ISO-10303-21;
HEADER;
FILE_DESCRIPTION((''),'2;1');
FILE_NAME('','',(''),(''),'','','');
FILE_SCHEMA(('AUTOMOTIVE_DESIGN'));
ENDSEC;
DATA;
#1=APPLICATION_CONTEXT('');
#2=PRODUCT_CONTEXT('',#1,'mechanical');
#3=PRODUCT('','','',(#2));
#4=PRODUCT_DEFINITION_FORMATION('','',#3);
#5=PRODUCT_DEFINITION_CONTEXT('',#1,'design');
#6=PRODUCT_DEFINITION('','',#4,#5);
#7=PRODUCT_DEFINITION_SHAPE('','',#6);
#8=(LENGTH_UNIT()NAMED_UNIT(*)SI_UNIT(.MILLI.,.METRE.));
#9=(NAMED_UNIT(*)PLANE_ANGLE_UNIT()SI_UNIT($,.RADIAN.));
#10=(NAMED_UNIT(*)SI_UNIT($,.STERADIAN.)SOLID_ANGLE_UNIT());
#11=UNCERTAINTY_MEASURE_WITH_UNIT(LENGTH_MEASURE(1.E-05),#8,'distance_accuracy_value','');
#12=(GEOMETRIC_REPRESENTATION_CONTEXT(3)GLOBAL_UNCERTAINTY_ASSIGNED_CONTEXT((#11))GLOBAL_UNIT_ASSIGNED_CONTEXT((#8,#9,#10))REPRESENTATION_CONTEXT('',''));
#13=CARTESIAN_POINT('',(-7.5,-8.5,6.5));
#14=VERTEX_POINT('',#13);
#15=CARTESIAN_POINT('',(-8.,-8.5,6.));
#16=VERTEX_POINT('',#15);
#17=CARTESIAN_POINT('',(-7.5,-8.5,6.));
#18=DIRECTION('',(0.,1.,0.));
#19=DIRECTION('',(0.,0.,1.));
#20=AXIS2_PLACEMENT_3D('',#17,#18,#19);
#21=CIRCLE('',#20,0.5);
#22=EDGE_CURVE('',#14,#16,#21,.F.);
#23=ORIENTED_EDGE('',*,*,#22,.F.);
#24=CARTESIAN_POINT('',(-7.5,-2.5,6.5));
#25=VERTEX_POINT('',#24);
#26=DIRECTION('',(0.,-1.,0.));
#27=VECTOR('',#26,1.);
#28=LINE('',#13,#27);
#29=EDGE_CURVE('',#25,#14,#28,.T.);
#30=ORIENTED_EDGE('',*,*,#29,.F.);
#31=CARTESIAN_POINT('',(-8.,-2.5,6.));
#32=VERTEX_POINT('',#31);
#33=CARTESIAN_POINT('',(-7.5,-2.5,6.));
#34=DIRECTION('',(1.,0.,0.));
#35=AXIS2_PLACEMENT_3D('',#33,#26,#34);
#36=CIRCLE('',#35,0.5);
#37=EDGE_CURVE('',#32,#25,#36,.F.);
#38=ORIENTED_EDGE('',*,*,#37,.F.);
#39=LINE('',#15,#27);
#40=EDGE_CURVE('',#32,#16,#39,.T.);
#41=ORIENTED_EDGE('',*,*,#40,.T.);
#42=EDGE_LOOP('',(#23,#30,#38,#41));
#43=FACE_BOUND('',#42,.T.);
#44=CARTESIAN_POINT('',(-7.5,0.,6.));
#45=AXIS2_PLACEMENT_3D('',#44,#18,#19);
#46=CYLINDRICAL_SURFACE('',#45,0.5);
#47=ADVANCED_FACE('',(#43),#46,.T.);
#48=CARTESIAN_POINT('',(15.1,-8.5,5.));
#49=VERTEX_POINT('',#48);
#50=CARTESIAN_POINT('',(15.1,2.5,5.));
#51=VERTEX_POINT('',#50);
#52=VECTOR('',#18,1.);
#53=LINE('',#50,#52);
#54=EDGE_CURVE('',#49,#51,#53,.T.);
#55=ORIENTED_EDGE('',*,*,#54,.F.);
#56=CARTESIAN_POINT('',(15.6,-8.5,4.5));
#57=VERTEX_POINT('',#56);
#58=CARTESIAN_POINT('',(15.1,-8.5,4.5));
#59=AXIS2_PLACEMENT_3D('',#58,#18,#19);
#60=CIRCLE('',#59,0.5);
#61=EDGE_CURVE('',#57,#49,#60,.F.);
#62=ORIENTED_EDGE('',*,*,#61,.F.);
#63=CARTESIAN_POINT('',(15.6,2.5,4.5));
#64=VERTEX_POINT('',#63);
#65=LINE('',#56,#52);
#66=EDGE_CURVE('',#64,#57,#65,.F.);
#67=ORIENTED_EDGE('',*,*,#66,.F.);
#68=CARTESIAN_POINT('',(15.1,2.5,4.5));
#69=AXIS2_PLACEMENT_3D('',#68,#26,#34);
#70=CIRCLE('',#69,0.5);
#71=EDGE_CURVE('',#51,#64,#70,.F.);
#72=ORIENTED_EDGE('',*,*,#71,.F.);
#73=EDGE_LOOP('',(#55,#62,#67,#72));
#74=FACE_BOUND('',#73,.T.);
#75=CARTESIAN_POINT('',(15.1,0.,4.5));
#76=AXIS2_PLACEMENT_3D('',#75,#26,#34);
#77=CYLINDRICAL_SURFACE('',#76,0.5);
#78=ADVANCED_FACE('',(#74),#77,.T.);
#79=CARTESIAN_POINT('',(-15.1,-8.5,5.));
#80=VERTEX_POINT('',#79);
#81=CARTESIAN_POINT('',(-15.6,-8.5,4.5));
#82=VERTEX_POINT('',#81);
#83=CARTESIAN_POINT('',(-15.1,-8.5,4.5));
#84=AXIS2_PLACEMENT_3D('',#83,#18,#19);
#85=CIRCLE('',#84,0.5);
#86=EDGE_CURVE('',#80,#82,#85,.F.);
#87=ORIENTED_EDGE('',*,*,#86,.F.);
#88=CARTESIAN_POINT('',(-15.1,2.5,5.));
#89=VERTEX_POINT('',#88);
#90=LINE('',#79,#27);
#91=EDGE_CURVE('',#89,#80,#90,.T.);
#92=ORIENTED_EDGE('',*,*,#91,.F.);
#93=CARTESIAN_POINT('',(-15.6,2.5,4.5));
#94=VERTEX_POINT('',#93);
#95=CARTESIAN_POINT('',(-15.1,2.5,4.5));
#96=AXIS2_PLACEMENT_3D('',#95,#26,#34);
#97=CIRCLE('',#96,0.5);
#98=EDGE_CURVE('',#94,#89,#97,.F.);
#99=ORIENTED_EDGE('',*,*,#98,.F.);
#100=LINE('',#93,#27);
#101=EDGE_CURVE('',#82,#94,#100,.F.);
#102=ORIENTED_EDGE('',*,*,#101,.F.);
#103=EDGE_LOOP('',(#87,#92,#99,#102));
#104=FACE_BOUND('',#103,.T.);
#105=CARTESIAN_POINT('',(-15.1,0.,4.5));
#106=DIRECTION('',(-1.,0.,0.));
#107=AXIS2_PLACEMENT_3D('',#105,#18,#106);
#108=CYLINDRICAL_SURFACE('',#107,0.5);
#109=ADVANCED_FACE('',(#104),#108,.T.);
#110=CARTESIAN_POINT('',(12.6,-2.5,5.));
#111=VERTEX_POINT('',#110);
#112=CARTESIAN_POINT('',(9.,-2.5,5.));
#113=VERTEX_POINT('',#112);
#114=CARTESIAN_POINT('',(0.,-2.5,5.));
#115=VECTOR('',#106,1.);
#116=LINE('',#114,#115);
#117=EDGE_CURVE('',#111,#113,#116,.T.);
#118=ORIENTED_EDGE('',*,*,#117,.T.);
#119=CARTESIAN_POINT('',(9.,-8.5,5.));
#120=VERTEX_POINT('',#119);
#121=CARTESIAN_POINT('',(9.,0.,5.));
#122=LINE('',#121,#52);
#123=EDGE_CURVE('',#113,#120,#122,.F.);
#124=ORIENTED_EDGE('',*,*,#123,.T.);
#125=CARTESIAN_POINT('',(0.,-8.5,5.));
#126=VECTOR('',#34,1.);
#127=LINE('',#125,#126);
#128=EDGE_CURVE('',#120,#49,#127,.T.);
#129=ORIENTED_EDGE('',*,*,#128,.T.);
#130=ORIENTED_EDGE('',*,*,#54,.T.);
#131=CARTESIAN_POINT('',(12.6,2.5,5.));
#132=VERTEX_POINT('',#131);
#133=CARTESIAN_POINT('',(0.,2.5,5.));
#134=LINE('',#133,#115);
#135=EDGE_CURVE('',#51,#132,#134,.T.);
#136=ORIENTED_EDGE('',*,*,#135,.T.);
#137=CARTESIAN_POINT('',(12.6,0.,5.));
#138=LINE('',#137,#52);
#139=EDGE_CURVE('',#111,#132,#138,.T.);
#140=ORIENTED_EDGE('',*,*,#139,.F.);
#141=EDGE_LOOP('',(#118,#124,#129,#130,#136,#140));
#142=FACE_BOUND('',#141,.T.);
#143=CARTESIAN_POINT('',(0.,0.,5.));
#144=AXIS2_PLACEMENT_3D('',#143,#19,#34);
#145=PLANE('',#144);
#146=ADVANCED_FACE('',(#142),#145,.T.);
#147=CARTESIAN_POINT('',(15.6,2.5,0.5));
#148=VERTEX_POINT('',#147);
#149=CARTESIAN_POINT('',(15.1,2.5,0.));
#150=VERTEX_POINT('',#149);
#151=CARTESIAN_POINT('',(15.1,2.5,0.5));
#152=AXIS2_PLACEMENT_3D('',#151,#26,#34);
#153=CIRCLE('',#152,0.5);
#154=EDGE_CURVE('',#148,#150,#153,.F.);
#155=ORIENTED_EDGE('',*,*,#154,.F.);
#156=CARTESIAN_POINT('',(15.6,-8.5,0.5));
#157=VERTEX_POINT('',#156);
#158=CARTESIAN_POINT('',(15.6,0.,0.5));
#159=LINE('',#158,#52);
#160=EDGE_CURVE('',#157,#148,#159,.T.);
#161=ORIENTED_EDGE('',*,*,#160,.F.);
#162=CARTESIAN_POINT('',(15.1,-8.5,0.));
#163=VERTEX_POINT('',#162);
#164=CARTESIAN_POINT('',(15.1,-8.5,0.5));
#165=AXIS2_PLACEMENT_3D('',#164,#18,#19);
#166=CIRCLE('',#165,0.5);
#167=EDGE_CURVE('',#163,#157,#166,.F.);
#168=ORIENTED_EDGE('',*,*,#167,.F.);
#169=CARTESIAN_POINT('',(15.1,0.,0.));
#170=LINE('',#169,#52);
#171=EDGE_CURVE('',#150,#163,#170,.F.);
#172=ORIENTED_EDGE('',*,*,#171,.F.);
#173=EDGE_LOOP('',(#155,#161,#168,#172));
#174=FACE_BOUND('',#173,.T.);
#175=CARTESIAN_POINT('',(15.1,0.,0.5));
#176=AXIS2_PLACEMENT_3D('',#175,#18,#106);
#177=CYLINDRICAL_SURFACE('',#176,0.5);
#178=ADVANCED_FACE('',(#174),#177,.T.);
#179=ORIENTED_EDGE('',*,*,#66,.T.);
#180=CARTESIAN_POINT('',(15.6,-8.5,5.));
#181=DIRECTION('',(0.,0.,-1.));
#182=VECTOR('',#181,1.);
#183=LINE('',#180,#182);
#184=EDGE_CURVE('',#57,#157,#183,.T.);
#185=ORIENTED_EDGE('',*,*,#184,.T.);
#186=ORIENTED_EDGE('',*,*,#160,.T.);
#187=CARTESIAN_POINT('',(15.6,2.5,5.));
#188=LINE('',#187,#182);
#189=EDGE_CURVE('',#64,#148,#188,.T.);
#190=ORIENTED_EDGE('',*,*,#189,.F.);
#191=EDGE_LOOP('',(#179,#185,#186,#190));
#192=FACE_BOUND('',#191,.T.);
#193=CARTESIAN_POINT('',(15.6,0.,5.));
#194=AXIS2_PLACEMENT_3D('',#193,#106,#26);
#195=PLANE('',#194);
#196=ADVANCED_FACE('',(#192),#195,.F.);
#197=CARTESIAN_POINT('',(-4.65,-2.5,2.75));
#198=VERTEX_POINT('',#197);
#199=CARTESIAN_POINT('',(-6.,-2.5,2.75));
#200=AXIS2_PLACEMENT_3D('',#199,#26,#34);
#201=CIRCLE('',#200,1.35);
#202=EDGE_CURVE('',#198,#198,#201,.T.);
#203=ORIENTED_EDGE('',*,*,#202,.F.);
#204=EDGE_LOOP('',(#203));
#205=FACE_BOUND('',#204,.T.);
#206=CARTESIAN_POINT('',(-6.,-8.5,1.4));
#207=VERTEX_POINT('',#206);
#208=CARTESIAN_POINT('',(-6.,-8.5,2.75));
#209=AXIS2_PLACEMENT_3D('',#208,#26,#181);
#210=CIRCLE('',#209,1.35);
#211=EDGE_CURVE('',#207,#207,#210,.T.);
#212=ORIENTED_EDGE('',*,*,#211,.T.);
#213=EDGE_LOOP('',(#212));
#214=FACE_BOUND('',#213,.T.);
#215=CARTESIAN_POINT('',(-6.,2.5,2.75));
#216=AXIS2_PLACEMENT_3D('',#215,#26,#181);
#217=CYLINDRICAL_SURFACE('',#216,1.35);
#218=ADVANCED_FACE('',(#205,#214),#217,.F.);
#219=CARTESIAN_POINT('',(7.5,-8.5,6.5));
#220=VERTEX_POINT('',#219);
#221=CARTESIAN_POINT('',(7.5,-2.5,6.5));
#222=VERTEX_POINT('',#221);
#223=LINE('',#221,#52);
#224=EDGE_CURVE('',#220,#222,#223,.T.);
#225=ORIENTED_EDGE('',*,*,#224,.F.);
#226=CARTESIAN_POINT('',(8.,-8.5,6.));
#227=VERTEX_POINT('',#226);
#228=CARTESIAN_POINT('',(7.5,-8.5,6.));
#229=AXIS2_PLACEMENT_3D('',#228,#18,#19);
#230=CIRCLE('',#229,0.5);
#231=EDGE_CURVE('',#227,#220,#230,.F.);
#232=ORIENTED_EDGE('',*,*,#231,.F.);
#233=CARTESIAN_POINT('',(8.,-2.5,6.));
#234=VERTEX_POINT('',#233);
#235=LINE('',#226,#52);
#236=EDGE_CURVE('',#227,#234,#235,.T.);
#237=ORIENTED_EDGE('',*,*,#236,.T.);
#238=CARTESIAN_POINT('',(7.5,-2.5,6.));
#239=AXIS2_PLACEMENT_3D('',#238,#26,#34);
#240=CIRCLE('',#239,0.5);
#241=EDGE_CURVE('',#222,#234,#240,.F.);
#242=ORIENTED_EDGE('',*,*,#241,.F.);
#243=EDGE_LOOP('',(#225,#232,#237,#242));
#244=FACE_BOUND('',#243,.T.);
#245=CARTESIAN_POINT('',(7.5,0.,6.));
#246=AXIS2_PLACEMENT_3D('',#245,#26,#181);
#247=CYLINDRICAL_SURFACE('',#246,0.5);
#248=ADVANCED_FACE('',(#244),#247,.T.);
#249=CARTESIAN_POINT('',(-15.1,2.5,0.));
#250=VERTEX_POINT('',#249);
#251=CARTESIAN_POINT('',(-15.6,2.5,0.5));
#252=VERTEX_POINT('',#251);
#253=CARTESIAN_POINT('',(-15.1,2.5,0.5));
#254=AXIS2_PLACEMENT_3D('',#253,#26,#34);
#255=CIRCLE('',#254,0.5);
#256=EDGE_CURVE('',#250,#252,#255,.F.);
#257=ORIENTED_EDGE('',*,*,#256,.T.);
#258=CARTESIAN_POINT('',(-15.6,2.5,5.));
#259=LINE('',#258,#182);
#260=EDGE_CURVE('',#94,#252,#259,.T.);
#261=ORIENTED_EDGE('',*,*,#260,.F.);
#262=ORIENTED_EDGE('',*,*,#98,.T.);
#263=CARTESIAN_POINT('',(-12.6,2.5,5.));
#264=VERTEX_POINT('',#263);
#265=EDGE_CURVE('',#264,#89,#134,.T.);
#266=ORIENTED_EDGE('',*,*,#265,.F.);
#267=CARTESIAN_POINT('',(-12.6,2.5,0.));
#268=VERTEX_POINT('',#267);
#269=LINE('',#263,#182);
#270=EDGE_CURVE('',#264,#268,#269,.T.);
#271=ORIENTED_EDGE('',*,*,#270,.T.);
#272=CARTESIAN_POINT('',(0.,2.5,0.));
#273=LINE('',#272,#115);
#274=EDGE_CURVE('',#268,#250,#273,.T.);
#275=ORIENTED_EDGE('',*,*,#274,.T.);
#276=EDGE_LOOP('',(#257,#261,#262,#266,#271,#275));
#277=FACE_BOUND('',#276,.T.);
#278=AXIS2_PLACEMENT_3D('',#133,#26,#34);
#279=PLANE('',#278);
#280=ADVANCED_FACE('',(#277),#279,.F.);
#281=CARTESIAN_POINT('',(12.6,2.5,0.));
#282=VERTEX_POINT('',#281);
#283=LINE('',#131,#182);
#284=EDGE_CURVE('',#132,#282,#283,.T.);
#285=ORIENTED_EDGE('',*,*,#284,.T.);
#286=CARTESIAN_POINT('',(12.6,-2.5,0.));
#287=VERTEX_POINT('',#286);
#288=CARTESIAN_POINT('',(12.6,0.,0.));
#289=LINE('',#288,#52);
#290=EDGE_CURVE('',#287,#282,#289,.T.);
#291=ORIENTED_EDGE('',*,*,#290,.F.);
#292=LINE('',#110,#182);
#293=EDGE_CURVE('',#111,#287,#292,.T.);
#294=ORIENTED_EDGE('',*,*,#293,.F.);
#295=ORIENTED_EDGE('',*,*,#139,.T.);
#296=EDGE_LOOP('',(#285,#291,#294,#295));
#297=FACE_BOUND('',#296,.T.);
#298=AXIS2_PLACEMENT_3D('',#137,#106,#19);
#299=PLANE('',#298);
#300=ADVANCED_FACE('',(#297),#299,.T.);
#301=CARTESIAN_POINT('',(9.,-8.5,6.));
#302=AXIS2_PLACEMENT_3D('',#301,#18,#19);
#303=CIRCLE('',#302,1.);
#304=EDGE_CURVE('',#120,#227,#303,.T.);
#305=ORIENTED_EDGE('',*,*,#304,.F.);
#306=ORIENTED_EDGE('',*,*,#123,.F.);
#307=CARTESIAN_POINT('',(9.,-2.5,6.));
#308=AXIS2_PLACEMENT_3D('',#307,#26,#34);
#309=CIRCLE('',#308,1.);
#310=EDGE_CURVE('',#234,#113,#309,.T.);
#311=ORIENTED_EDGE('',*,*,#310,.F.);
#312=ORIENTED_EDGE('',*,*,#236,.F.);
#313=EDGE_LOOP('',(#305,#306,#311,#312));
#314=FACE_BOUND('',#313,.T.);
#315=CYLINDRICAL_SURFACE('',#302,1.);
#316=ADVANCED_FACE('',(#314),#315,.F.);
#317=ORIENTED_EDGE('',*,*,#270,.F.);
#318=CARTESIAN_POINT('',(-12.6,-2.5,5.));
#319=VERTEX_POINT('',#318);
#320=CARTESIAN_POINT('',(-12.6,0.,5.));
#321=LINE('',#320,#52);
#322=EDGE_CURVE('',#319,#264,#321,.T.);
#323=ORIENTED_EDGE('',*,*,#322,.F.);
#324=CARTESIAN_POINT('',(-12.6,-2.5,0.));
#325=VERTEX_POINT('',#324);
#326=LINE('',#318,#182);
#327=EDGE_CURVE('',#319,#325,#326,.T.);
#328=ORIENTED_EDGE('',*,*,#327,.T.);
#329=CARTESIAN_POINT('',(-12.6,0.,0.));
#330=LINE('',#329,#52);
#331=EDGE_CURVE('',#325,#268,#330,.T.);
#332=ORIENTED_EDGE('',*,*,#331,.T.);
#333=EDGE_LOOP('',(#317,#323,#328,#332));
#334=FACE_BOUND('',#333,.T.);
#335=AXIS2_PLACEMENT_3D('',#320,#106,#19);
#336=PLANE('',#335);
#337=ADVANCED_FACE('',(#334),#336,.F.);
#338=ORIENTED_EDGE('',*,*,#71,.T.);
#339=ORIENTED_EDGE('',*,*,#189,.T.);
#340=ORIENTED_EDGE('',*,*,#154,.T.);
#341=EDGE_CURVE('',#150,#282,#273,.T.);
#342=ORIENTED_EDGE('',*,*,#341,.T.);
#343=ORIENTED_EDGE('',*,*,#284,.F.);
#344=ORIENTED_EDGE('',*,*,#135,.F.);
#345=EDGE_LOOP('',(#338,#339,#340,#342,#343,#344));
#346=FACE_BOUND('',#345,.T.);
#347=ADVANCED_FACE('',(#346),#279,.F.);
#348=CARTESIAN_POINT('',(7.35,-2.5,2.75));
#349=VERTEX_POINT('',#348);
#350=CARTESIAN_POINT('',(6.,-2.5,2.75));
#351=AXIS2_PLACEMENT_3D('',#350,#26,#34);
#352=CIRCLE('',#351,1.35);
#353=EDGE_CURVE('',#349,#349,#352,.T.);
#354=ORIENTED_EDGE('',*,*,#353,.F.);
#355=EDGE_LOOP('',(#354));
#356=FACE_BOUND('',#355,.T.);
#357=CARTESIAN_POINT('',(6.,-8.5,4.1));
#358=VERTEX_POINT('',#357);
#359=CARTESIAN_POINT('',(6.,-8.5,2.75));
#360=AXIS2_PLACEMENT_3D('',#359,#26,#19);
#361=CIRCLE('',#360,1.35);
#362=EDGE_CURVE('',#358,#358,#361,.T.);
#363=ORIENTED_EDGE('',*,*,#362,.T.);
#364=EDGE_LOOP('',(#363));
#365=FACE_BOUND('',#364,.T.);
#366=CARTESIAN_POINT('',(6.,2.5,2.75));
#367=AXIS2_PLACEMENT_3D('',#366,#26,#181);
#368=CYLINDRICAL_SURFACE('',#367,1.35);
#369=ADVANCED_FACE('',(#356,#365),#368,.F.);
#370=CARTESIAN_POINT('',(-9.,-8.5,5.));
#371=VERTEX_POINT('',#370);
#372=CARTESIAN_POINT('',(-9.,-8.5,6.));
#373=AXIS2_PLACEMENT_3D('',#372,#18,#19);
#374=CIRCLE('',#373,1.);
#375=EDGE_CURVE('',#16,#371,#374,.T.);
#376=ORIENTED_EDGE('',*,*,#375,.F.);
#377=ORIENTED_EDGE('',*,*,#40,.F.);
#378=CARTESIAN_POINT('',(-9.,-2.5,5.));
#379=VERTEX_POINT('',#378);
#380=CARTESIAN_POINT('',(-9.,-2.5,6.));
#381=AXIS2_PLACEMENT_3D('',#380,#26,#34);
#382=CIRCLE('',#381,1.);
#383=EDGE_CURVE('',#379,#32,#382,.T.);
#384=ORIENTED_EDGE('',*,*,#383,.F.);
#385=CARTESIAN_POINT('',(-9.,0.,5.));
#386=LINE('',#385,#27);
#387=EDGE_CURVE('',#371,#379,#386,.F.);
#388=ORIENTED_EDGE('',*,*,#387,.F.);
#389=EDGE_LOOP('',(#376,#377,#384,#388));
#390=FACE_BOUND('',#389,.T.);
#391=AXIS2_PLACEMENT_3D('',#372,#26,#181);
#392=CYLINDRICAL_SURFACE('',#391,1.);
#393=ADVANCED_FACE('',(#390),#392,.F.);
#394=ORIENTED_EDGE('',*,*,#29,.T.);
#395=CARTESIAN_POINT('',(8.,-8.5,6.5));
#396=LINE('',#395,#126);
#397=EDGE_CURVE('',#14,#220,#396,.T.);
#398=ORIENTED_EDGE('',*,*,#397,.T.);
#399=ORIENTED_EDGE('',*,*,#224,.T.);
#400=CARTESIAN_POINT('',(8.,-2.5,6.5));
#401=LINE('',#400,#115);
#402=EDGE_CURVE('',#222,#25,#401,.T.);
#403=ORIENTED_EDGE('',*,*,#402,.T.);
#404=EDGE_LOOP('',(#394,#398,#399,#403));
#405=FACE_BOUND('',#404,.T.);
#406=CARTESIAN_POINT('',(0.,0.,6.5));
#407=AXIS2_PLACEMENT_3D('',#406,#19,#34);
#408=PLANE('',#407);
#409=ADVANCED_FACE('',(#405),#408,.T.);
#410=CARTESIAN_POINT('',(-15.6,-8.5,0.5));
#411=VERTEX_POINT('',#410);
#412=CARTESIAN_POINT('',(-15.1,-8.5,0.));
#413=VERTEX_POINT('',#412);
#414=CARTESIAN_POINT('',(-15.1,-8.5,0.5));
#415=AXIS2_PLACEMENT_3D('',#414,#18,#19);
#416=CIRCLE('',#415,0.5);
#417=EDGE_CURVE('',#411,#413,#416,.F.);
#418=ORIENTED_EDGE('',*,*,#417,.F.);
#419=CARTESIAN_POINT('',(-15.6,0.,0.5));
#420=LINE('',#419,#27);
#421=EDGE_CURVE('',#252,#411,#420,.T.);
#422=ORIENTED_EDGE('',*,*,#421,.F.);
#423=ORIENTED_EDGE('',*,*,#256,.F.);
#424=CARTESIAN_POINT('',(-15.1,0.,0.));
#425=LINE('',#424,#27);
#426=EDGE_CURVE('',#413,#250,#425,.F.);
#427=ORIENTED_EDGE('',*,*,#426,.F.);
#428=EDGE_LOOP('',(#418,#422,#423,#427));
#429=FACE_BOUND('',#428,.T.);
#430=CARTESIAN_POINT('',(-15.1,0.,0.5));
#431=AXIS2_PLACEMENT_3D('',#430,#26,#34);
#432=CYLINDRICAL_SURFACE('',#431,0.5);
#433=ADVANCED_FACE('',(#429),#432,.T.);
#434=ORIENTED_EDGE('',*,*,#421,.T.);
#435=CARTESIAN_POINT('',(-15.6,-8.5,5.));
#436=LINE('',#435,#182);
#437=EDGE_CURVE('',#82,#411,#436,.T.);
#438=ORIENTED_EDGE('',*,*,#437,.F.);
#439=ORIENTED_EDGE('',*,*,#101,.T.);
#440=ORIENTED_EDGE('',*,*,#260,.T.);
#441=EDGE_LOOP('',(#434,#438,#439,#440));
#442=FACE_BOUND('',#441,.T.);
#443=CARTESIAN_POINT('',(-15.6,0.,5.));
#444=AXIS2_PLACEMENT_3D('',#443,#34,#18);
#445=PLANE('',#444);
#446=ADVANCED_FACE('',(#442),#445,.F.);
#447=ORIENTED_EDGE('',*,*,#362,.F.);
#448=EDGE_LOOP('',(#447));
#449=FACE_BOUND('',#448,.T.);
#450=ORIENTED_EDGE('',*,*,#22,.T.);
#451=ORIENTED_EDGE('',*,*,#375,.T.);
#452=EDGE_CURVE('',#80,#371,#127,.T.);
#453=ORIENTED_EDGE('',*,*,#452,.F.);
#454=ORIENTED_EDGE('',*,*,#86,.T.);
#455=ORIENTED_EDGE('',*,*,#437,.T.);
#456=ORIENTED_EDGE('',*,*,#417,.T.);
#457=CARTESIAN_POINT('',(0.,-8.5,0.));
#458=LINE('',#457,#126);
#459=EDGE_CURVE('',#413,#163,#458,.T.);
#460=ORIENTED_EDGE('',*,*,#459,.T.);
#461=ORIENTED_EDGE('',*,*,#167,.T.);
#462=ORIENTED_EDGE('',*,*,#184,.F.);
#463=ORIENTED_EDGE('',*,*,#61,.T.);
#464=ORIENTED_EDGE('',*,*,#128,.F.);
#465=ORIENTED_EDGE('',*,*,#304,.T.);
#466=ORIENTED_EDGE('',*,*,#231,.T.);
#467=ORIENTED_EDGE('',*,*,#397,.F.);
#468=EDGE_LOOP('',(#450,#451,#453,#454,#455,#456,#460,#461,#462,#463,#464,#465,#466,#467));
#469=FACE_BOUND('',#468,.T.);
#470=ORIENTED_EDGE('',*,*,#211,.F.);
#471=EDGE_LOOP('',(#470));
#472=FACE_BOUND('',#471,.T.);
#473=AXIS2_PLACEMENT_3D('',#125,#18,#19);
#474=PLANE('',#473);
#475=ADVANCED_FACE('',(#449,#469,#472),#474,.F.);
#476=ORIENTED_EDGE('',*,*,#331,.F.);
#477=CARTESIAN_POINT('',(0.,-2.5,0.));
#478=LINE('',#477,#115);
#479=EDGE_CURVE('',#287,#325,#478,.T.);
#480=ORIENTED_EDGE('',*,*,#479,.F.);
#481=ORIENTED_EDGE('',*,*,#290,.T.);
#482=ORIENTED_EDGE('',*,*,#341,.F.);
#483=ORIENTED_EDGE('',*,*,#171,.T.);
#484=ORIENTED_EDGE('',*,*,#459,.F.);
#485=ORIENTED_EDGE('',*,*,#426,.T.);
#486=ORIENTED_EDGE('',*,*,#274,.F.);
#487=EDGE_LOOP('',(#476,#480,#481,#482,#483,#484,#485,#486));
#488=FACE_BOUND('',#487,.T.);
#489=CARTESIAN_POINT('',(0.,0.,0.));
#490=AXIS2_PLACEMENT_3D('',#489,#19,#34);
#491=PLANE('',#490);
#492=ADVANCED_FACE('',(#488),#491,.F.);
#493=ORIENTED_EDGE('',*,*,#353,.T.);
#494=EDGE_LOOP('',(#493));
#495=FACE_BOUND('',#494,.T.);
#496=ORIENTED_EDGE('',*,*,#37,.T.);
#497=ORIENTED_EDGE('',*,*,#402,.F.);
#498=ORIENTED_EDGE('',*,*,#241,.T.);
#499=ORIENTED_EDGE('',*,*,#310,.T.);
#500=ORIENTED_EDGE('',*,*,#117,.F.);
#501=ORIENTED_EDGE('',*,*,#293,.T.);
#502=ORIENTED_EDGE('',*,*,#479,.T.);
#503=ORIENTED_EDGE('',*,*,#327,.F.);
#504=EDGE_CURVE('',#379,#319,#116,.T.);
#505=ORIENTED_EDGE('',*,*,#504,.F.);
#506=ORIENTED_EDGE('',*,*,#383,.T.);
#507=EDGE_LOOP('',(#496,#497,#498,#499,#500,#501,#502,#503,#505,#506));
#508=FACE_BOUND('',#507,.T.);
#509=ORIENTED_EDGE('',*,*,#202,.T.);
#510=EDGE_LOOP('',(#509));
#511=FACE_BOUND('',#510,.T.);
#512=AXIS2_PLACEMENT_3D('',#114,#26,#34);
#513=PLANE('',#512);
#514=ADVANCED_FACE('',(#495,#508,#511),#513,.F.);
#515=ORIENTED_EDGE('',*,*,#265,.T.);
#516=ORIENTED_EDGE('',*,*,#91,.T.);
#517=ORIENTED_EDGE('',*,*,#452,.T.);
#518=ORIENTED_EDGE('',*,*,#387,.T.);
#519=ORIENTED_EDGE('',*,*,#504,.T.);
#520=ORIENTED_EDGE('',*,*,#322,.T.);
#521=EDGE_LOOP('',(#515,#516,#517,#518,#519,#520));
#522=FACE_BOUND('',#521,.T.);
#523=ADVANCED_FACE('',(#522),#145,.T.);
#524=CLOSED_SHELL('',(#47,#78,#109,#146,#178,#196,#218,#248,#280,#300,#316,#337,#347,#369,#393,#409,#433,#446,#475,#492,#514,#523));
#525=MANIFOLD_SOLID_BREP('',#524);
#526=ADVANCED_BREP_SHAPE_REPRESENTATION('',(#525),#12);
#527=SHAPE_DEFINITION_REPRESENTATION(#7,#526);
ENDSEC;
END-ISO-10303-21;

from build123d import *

# Parameters (mm, degrees)
EXTRUDE_1_DEPTH     = 5
SKETCH_2_W          = 16
SKETCH_2_H          = 6
EXTRUDE_2_DEPTH     = 1.5
SKETCH_3_R          = 1.35
CUT_EXTRUDE_1_DEPTH = 21.164572894
FILLET_1_R          = 1
FILLET_2_R          = 0.5


with BuildPart() as part:
    # 草图1 → 凸台-拉伸1 (new body)
    with BuildSketch(Plane.XY):
        Polygon((-12.6, 2.5), (-15.6, 2.5), (-15.6, -8.5), (15.6, -8.5), (15.6, 2.5), (12.6, 2.5), (12.6, -2.5), (-12.6, -2.5), align=None)
    extrude(amount=EXTRUDE_1_DEPTH)

    # 草图2 → 凸台-拉伸2 (add)
    with BuildSketch(Plane.XY.offset(5)):
        with Locations((0, -5.5)):
            Rectangle(SKETCH_2_W, SKETCH_2_H)
    extrude(amount=EXTRUDE_2_DEPTH)

    # 草图3 → 切除-拉伸1 (cut, through all)
    with BuildSketch(Plane.XZ.offset(8.5)):
        with Locations(Location((-6, 2.75, 0), (0, 0, 270))):
            Circle(SKETCH_3_R)
        with Locations((6, 2.75)):
            Circle(SKETCH_3_R)
    extrude(amount=-CUT_EXTRUDE_1_DEPTH, mode=Mode.SUBTRACT)

    # 圆角1
    fillet_1_edges = [part.edges().sort_by_distance(p)[0] for p in [
        (-8, -5.5, 5),
        (8, -5.5, 5),
    ]]
    fillet(fillet_1_edges, radius=FILLET_1_R)

    # 圆角2
    fillet_2_edges = [part.edges().sort_by_distance(p)[0] for p in [
        (15.6, -3, 0),
        (15.6, -3, 5),
        (8, -5.5, 6.5),
        (-8, -5.5, 6.5),
        (-15.6, -3, 5),
        (-15.6, -3, 0),
    ]]
    fillet(fillet_2_edges, radius=FILLET_2_R - 0.0001)  # a hair under: the kernel refuses the full size


solid = part.part
